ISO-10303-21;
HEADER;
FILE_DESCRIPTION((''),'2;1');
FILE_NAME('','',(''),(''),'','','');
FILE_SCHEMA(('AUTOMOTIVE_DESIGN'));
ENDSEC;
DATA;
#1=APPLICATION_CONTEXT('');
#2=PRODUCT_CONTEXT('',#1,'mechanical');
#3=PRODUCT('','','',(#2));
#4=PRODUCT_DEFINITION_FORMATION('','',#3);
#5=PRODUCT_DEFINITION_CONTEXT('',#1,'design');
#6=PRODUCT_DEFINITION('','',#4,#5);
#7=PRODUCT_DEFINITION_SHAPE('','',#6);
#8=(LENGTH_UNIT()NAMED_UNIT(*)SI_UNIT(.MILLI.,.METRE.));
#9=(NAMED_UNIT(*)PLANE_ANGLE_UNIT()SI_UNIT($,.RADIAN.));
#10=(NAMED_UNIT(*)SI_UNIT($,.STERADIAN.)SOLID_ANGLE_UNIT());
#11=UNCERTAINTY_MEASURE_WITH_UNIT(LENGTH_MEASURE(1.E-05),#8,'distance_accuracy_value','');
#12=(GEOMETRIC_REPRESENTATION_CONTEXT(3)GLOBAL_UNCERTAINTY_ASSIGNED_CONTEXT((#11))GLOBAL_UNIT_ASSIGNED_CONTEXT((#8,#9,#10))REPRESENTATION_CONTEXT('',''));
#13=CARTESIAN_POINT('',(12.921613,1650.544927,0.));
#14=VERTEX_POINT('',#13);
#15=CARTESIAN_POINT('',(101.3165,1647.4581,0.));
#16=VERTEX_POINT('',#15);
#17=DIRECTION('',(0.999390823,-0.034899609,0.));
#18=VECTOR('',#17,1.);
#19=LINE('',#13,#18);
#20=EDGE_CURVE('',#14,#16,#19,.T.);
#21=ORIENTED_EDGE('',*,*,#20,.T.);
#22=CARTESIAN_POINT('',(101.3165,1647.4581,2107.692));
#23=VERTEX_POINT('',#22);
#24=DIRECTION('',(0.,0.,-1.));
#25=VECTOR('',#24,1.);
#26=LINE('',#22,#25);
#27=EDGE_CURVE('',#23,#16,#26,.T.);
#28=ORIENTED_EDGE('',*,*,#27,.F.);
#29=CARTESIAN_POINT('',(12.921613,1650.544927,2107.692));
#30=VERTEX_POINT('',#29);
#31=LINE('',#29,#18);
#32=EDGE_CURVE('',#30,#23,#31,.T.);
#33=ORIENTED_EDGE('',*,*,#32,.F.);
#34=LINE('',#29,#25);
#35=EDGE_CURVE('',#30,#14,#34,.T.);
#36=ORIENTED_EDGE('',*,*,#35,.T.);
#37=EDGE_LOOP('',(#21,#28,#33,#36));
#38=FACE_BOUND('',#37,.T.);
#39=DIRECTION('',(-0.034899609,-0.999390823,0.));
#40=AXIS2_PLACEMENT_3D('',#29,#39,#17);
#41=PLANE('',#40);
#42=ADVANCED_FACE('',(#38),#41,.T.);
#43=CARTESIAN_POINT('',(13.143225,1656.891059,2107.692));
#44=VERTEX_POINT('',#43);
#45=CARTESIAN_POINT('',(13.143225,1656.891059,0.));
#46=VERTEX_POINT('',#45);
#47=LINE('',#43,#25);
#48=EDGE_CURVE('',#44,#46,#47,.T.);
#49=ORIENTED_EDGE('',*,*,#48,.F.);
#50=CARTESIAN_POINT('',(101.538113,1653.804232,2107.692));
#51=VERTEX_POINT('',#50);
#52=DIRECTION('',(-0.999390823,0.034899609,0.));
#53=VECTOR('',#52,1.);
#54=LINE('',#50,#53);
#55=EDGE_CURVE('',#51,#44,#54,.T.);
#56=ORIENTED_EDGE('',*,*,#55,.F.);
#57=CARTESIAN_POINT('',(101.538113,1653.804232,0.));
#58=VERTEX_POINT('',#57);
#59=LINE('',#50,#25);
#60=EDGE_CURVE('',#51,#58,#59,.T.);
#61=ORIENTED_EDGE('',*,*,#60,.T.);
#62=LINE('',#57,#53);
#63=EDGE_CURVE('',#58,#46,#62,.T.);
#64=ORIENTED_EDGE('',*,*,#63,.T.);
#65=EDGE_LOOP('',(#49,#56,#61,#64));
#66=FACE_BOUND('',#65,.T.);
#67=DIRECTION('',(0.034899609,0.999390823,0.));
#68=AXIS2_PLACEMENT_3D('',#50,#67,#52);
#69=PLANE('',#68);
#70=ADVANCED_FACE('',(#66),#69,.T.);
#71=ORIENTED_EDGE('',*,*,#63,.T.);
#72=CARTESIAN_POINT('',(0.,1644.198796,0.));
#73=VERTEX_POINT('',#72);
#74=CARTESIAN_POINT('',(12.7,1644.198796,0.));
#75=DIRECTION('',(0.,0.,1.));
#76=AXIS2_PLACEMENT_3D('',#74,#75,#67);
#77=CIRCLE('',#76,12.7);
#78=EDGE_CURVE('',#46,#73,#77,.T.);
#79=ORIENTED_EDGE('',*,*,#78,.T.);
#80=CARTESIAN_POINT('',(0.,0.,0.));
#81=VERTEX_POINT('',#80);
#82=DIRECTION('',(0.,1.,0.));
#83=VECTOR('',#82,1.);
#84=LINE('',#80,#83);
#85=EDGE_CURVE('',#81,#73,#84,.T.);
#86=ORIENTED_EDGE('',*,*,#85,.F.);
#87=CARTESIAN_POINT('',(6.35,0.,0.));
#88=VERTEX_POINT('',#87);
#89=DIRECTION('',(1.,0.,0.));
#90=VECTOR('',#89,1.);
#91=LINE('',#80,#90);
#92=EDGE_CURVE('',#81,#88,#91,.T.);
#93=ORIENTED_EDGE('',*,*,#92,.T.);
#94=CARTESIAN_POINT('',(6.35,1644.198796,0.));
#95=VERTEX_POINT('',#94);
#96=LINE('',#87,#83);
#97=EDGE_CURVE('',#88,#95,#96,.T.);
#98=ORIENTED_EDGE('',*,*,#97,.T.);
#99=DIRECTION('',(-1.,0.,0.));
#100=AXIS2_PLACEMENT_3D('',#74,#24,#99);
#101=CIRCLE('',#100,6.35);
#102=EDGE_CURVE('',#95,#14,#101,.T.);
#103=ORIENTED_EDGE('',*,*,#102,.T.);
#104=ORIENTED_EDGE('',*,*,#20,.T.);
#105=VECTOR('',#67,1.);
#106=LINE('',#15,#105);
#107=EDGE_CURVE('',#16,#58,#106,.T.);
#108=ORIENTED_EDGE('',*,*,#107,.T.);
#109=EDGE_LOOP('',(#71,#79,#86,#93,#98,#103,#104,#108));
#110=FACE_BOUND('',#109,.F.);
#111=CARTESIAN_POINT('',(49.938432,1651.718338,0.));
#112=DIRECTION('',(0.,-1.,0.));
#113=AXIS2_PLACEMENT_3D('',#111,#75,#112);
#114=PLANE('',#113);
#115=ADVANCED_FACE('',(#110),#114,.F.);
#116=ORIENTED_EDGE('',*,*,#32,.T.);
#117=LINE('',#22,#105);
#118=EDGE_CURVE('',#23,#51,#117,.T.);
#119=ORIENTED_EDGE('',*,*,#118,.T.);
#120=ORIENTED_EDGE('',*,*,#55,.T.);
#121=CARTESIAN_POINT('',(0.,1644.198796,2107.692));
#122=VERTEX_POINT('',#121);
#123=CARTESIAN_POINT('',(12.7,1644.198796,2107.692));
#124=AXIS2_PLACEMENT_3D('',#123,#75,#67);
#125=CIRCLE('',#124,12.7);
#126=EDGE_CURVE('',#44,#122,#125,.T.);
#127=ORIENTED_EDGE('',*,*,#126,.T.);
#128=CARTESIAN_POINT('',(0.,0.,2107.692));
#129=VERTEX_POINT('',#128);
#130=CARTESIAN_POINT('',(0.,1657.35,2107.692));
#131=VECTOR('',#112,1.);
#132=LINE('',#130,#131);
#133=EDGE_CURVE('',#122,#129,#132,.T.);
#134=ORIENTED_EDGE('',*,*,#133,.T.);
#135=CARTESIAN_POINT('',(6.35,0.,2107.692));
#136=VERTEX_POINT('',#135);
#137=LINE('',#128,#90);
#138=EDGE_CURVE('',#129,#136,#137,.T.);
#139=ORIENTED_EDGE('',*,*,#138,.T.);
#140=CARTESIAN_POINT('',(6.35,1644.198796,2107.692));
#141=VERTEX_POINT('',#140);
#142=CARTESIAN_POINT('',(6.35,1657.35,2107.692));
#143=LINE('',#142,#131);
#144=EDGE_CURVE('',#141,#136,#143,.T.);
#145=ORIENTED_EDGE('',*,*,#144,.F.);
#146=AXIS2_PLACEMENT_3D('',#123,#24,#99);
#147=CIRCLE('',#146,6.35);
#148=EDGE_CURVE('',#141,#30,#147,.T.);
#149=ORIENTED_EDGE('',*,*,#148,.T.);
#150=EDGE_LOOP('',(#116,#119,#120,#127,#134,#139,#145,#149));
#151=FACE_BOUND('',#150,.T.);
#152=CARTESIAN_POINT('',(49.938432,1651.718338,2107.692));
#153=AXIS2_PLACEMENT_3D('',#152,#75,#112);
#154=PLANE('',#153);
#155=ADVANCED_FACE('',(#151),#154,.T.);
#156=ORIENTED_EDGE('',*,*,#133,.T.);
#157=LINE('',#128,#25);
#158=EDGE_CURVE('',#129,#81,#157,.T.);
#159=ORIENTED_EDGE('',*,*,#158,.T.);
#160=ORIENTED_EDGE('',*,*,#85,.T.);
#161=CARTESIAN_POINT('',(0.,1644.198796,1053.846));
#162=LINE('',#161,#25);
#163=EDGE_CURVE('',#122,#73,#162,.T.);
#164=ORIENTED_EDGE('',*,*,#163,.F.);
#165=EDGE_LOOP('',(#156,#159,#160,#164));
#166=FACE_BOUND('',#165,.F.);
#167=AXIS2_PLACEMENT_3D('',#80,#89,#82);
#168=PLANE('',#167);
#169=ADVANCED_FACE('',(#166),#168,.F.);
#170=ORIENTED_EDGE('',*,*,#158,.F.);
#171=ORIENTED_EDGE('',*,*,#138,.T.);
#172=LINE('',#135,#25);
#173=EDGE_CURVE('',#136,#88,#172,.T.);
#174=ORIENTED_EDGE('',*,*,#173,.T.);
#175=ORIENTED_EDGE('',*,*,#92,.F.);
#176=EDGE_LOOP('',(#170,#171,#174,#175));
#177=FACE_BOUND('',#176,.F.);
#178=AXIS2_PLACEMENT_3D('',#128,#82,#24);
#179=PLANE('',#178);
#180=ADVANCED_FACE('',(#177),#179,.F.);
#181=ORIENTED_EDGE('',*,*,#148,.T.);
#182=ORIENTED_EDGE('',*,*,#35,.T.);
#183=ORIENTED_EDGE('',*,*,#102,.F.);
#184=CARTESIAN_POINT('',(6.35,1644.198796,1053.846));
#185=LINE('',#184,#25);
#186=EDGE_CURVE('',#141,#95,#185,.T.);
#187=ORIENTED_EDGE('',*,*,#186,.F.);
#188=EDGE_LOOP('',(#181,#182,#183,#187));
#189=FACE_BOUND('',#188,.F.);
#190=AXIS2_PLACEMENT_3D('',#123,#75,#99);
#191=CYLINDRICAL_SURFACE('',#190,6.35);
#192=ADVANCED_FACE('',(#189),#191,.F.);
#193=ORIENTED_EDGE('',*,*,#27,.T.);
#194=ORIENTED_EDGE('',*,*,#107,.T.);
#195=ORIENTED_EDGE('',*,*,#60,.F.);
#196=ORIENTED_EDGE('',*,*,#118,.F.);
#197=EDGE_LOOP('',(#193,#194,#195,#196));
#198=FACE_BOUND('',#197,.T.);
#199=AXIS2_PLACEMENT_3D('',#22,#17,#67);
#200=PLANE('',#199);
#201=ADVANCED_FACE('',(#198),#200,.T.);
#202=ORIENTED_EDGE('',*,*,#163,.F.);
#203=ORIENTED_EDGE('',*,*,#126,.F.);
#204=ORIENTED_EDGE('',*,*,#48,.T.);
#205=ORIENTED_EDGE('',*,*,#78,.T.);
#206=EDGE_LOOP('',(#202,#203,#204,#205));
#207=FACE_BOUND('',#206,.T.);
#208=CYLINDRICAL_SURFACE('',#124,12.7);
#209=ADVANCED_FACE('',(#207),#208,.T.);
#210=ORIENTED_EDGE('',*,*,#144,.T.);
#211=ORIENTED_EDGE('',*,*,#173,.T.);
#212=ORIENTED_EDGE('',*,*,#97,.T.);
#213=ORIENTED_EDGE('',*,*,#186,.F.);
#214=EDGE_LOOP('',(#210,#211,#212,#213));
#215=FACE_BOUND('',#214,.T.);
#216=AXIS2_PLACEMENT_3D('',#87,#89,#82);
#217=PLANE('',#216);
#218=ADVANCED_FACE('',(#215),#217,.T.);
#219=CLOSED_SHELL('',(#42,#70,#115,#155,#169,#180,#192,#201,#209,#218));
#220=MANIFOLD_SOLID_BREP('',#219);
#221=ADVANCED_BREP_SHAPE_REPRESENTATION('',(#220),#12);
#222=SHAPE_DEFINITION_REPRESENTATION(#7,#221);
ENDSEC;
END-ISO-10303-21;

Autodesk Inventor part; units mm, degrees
ref_plane "YZ Plane" through (0, 0, 0) normal (1, 0, 0) x (0, 1, 0)
ref_plane "XZ Plane" through (0, 0, 0) normal (0, 1, 0) x (-1, 0, 0)
ref_plane "XY Plane" through (0, 0, 0) normal (0, 0, 1) x (1, 0, 0)
sketch "Sketch29" plane through (0, 0, 0) normal (1, 0, 0) x (0, 1, 0)
  line L0 (0, 0) -> (1657.35, 0)
  line L1 (1657.35, 0) -> (1657.35, 2107.692)
  line L2 (1657.35, 2107.692) -> (0, 2107.692)
  line L3 (0, 2107.692) -> (0, 0)
  dimension "d230" = 2107.692
  dimension "d231" = 1657.35
extrude "Plate26" add sketch "Sketch29" along normal blind 6.35
sketch "Sketch30" plane through (-0.2216, 1651.0039, 2107.692) normal (0.0348995, 0.9993908, 0) x (-0.9993908, 0.0348995, 0)
  line L0 (0, -2107.692) -> (0, 0)
  line L1 (0, 0) -> (-101.6, 0)
  line L2 (-101.6, 0) -> (-101.6, -2107.692)
  line L3 (-101.6, -2107.692) -> (0, -2107.692)
edge flange "Flange23" height 101.6 angle 92 thickness 6.35 bend radius 6.35 thickness toward (0.0348995, 0.9993908, 0) relief tear relief width 6.35 relief depth 3.175 edges at (6.35, 1657.35, 1053.846) wall of the first edge with corners at (-0.2216, 1651.0039, 0) (-0.2216, 1651.0039, 2107.692) (101.3165, 1647.4581, 2107.692) (101.3165, 1647.4581, 0)
bend "Bend23"
corner "Corner22"
equation "\"d230\" = LARGO"
equation "\"d231\" = ALTO"
equation "\"d237\" = LARGOF"
equation "\"d238\" = ANGULOF"
equation "\"BendRadius\" = Thickness"
equation "\"BendReliefWidth\" = Thickness"
equation "\"BendReliefDepth\" = 0.5 * Thickness"
equation "\"CornerReliefSize\" = 4 * Thickness"
equation "\"MinimumRemnant\" = 2 * Thickness"
equation "\"TransitionRadius\" = BendRadius"
equation "\"JacobiRadiusSize\" = BendRadius"
equation "\"GapSize\" = Thickness"
equation "\"LARGO\" = 2107.692"
equation "\"ALTO\" = 1657.35"
equation "\"LARGOF\" = 101.6"
equation "\"ANGULOF\" = 92deg"
properties part number "BackWallTop" material "Carbon Steel - A36"
